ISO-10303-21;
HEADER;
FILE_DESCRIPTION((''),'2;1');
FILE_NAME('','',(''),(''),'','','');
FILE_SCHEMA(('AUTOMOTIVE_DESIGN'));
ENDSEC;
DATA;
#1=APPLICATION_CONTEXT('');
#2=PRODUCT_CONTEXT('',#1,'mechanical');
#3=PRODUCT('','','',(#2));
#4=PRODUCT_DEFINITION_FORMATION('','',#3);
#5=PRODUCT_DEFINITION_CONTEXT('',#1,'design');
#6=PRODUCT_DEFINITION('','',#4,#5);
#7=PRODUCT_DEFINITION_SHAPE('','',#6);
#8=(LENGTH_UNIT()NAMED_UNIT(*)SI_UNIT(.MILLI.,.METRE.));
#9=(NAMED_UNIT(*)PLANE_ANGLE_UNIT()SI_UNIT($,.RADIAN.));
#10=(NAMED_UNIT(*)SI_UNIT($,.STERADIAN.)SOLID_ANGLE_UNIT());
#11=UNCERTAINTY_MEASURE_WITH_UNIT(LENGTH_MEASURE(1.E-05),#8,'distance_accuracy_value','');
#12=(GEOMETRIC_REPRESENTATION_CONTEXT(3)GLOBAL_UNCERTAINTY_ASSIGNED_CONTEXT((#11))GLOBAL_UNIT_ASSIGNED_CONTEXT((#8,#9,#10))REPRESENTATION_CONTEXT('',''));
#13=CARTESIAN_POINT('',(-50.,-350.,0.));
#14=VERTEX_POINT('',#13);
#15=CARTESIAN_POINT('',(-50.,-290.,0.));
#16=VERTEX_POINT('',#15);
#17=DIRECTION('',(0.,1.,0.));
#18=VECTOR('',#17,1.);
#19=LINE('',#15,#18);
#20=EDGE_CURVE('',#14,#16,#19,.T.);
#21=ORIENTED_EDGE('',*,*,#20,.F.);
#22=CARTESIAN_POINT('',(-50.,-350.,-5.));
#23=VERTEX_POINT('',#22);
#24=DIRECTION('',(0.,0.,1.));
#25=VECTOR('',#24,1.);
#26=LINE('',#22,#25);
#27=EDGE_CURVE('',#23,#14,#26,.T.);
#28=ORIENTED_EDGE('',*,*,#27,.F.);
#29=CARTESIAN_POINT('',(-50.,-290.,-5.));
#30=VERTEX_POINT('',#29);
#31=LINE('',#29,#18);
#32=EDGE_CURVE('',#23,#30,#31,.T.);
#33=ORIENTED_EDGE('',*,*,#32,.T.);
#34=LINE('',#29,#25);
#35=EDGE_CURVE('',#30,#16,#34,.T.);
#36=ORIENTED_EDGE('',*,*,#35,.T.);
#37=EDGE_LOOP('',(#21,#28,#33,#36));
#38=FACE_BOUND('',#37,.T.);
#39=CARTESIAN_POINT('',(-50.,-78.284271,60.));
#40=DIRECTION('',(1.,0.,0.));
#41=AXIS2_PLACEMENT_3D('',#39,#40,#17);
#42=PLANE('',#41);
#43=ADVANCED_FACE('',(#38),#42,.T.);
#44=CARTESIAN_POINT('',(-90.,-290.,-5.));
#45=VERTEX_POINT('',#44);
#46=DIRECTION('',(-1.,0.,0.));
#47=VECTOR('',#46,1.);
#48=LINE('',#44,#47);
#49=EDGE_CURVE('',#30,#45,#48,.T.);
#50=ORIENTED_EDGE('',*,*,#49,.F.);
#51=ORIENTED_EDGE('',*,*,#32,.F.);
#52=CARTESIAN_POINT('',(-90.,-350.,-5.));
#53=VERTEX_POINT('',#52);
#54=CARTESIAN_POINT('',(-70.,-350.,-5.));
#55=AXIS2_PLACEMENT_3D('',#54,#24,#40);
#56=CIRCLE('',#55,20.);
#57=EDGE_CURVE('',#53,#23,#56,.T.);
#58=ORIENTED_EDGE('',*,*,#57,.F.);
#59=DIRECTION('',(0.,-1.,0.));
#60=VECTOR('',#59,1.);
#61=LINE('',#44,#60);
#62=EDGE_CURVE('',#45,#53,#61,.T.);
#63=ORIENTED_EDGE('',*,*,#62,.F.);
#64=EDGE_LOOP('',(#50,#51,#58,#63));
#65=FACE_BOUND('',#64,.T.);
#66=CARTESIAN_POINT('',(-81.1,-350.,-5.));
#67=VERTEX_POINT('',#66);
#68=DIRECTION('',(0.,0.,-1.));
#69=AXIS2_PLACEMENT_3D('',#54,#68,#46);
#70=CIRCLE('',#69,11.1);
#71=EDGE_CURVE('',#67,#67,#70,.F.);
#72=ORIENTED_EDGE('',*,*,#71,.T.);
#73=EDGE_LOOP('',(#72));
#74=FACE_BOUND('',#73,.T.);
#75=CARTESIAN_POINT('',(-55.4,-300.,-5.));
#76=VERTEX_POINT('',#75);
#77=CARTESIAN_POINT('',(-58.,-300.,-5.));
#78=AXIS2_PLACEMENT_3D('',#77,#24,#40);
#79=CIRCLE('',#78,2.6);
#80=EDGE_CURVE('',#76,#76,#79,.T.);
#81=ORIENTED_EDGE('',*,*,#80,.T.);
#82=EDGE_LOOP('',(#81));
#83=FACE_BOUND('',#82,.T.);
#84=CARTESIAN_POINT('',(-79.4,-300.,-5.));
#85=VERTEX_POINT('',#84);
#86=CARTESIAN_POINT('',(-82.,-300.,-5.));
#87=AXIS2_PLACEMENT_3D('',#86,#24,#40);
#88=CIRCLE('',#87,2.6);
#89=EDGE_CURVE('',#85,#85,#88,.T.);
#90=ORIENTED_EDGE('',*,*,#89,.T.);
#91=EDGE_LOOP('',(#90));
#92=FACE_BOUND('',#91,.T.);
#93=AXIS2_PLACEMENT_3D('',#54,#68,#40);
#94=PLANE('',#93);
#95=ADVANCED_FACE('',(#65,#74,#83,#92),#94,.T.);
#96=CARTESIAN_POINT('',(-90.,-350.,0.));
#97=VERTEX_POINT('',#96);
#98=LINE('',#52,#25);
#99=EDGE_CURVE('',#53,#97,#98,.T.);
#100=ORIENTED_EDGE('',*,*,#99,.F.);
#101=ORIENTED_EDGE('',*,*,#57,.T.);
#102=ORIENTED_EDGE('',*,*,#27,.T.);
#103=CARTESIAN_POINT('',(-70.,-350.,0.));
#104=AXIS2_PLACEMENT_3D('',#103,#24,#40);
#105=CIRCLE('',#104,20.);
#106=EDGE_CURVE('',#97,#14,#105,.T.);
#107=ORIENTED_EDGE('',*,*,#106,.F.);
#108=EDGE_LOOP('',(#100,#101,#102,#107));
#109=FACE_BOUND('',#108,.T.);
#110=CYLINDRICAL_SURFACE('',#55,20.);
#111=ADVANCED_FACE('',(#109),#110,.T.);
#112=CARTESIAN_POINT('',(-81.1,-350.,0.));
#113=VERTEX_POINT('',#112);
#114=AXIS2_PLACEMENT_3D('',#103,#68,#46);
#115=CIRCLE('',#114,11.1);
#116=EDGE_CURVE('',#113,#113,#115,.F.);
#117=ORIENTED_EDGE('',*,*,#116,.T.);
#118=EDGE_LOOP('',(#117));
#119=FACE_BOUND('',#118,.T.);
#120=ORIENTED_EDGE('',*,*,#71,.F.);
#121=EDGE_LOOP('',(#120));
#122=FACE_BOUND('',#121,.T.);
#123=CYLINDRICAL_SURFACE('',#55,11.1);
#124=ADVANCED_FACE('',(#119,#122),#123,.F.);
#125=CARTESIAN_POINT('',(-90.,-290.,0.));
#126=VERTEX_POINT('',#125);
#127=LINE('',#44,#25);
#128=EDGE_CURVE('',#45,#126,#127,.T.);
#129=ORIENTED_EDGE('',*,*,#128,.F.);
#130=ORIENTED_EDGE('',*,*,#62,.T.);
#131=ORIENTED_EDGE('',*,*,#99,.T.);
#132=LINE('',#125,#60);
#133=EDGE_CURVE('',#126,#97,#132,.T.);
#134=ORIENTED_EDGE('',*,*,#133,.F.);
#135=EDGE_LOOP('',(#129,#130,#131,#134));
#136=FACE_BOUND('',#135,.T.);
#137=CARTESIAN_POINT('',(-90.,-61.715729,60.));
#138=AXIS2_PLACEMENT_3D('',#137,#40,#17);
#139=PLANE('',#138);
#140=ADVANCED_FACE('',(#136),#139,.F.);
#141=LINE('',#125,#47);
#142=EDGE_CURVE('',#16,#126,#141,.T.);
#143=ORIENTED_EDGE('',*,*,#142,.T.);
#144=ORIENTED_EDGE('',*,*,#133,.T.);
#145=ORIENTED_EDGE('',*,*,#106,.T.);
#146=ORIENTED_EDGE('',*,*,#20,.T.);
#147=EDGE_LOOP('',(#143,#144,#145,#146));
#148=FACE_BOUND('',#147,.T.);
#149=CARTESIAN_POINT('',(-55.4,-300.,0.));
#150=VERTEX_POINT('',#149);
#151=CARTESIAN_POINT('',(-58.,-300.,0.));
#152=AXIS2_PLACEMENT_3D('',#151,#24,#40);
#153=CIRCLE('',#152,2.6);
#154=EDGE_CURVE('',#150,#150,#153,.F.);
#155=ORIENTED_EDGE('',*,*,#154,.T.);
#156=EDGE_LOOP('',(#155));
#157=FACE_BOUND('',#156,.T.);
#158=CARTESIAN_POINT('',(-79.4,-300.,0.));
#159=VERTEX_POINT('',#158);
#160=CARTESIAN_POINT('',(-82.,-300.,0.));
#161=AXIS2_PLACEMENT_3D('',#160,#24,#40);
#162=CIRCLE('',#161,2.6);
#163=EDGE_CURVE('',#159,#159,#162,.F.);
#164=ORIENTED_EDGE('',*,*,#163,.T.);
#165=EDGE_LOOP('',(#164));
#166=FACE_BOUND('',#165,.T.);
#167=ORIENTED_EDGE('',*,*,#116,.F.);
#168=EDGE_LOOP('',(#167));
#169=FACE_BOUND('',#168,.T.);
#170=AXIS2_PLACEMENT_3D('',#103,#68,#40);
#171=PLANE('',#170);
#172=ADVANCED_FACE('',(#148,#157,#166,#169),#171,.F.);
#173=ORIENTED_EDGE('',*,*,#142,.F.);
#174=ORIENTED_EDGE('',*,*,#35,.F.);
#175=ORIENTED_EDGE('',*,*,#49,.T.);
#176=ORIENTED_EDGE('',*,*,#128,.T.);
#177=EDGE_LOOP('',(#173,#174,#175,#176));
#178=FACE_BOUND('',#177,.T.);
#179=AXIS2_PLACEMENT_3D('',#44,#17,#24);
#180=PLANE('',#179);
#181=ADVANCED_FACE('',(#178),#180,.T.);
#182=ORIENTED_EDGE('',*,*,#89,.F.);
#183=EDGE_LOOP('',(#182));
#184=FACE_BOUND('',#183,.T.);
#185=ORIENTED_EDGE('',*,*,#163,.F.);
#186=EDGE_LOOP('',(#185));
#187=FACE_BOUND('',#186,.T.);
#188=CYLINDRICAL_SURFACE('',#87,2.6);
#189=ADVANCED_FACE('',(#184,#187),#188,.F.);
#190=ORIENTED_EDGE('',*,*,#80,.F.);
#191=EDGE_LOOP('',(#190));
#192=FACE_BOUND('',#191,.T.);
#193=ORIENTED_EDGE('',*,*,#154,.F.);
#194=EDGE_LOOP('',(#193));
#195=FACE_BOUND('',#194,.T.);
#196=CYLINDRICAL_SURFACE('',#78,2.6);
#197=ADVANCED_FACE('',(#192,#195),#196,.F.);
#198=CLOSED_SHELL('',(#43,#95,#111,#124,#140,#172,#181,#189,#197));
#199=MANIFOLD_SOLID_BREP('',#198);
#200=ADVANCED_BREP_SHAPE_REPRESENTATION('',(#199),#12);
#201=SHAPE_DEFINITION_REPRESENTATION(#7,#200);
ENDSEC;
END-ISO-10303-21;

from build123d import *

# Parameters (mm, degrees)
SKETCH_1_R                = 20
SKETCH_1_R_2              = 11
EXTRUDE_1_DEPTH           = 60
EXTRUDE_2_DEPTH           = 30
SKETCH_4_R                = 11
EXTRUDE_3_DEPTH           = 5
SKETCH_8_R                = 11
CUT_EXTRUDE_1_DEPTH       = 100
FILLET_4_R                = 20
EXTRUDE_START             = -30
SKETCH_18_R               = 35
EXTRUDE_4_DEPTH           = 5
EXTRUDE_START_2           = -25
SKETCH_19_R               = 35
EXTRUDE_5_DEPTH           = 5
FILLET_5_R                = 10
CUT_EXTRUDE_9_DEPTH       = 388.169213652
CUT_EXTRUDE_9_DEPTH_BACK  = 388.169213652
SKETCH_21_R               = 2.6
CUT_EXTRUDE_10_DEPTH      = 407.881000043
CUT_EXTRUDE_10_DEPTH_BACK = 407.881000043
SKETCH_22_W               = 65
SKETCH_22_H               = 431.087956996
MOVE_FACE_1_BY            = 0.1


with BuildPart() as part:
    # 草图1 → 凸台-拉伸1 (new body)
    with BuildSketch(Plane.XY):
        Circle(SKETCH_1_R)
        Circle(SKETCH_1_R_2, mode=Mode.SUBTRACT)
    extrude(amount=EXTRUDE_1_DEPTH)

    # 草图2 → 凸台-拉伸2 (add, symmetric)
    with BuildSketch(Plane.XY.offset(30)):
        with BuildLine():
            Line((-14.142135624, 14.142135624), (-90, -61.715728753))
            Line((-90, -61.715728753), (-90, -320))
            Line((-90, -320), (-50, -320))
            Line((-50, -320), (-50, -78.284271247))
            Line((-50, -78.284271247), (14.142135624, -14.142135624))
            ThreePointArc((14.142135624, -14.142135624), (-14.142135624, -14.142135624), (-14.142135624, 14.142135624))
        make_face()
    extrude(amount=EXTRUDE_2_DEPTH, both=True)

    # 草图4 → 凸台-拉伸3 (add)
    with BuildSketch(Plane.XY.offset(60)):
        with BuildLine():
            Line((-90, -290), (-50, -290))
            Line((-50, -290), (-50, -350))
            ThreePointArc((-50, -350), (-70, -370), (-90, -350))
            Line((-90, -350), (-90, -290))
        make_face()
        with Locations((-70, -350)):
            Circle(SKETCH_4_R, mode=Mode.SUBTRACT)
    extrude_3 = extrude(amount=EXTRUDE_3_DEPTH)

    # 镜向1: 凸台-拉伸3 across plane
    add(extrude_3.mirror(Plane.XY.offset(30)))

    # 草图8 → 切除-拉伸1 (cut)
    with BuildSketch(Plane.XY.offset(60)):
        with Locations((-35.355339059, -35.355339059)):
            Circle(SKETCH_8_R)
    extrude(amount=-CUT_EXTRUDE_1_DEPTH, mode=Mode.SUBTRACT)

    # 圆角4
    fillet_4_edges = [part.edges().sort_by_distance(p)[0] for p in [
        (-50, -78.284271247, 30),
        (-90, -61.715728753, 30),
    ]]
    fillet(fillet_4_edges, radius=FILLET_4_R)

    # 草图18 → 凸台-拉伸4 (add)
    with BuildSketch(Plane.XY.offset(60).offset(EXTRUDE_START)):
        with BuildLine():
            ThreePointArc((15.487252676, -12.654841151), (14.833346688, -13.415357842), (14.142135624, -14.142135624))
            Line((14.142135624, -14.142135624), (-44.142135624, -72.426406871))
            ThreePointArc((-44.142135624, -72.426406871), (-48.47759065, -78.914873848), (-50, -86.568542495))
            Line((-50, -86.568542495), (-50, -128.513280962))
            Line((-50, -128.513280962), (20.291868618, -128.513280962))
            ThreePointArc((20.291868618, -128.513280962), (62.790327113, -100.116718851), (52.818780552, -49.986369028))
            Line((52.818780552, -49.986369028), (15.487252676, -12.654841151))
        make_face()
        with Locations((20.291868618, -82.513280962)):
            Circle(SKETCH_18_R, mode=Mode.SUBTRACT)
    extrude(amount=EXTRUDE_4_DEPTH)

    # 草图19 → 凸台-拉伸5 (add)
    with BuildSketch(Plane(origin=(0, 0, 0), x_dir=(-1, 0, 0), z_dir=(0, 0, -1)).offset(EXTRUDE_START_2)):
        with BuildLine():
            Line((50, -134.571348531), (50, -226.571348531))
            Line((50, -226.571348531), (-0.680255104, -226.571348531))
            ThreePointArc((-0.680255104, -226.571348531), (-46.680255104, -180.571348531), (-0.680255104, -134.571348531))
            Line((-0.680255104, -134.571348531), (50, -134.571348531))
        make_face()
        with Locations((-0.680255104, -180.571348531)):
            Circle(SKETCH_19_R, mode=Mode.SUBTRACT)
    extrude(amount=-EXTRUDE_5_DEPTH)

    # 圆角5
    # the kernel refuses this fillet: 10 mm, written as the material it adds along each edge
    with BuildSketch(Plane(origin=(-50, -226.571348531, 25), x_dir=(0, -1, 0), z_dir=(0, 0, 1)), Plane(origin=(-50, -128.513280962, 30), x_dir=(0, -1, 0), z_dir=(0, 0, 1))) as fillet_5_piece_1:
        with BuildLine():
            CenterArc((FILLET_5_R, FILLET_5_R), FILLET_5_R, 180, 90)
            Line((0, FILLET_5_R), (0, 0))
            Line((0, 0), (FILLET_5_R, 0))
        make_face()
    extrude(amount=5)

    # 草图21 → 切除-拉伸9 (cut, two sides: drawn at the far end of the back side and taken through both)
    with BuildSketch(Plane.XY.offset(65).offset(-CUT_EXTRUDE_9_DEPTH_BACK)):
        with Locations((-70, -75)):
            Circle(SKETCH_21_R)
        with Locations((-70, -250)):
            Circle(SKETCH_21_R)
        with Locations((-58, -300)):
            Circle(SKETCH_21_R)
        with Locations((-82, -300)):
            Circle(SKETCH_21_R)
    extrude(amount=CUT_EXTRUDE_9_DEPTH + CUT_EXTRUDE_9_DEPTH_BACK, mode=Mode.SUBTRACT)

    # 草图22 → 切除-拉伸10 (cut, two sides: drawn at the far end of the back side and taken through both)
    with BuildSketch(Plane.ZY.offset(90).offset(-CUT_EXTRUDE_10_DEPTH_BACK)):
        with Locations((32.5, -154.456021502)):
            Rectangle(SKETCH_22_W, SKETCH_22_H)
    extrude(amount=CUT_EXTRUDE_10_DEPTH + CUT_EXTRUDE_10_DEPTH_BACK, mode=Mode.SUBTRACT)

    # Move Face 1: a curved face moved inward by 0.1
    add(Solid.thicken(part.faces().sort_by_distance((-81, -350, -2.5))[0], -MOVE_FACE_1_BY), mode=Mode.SUBTRACT)


solid = part.part
